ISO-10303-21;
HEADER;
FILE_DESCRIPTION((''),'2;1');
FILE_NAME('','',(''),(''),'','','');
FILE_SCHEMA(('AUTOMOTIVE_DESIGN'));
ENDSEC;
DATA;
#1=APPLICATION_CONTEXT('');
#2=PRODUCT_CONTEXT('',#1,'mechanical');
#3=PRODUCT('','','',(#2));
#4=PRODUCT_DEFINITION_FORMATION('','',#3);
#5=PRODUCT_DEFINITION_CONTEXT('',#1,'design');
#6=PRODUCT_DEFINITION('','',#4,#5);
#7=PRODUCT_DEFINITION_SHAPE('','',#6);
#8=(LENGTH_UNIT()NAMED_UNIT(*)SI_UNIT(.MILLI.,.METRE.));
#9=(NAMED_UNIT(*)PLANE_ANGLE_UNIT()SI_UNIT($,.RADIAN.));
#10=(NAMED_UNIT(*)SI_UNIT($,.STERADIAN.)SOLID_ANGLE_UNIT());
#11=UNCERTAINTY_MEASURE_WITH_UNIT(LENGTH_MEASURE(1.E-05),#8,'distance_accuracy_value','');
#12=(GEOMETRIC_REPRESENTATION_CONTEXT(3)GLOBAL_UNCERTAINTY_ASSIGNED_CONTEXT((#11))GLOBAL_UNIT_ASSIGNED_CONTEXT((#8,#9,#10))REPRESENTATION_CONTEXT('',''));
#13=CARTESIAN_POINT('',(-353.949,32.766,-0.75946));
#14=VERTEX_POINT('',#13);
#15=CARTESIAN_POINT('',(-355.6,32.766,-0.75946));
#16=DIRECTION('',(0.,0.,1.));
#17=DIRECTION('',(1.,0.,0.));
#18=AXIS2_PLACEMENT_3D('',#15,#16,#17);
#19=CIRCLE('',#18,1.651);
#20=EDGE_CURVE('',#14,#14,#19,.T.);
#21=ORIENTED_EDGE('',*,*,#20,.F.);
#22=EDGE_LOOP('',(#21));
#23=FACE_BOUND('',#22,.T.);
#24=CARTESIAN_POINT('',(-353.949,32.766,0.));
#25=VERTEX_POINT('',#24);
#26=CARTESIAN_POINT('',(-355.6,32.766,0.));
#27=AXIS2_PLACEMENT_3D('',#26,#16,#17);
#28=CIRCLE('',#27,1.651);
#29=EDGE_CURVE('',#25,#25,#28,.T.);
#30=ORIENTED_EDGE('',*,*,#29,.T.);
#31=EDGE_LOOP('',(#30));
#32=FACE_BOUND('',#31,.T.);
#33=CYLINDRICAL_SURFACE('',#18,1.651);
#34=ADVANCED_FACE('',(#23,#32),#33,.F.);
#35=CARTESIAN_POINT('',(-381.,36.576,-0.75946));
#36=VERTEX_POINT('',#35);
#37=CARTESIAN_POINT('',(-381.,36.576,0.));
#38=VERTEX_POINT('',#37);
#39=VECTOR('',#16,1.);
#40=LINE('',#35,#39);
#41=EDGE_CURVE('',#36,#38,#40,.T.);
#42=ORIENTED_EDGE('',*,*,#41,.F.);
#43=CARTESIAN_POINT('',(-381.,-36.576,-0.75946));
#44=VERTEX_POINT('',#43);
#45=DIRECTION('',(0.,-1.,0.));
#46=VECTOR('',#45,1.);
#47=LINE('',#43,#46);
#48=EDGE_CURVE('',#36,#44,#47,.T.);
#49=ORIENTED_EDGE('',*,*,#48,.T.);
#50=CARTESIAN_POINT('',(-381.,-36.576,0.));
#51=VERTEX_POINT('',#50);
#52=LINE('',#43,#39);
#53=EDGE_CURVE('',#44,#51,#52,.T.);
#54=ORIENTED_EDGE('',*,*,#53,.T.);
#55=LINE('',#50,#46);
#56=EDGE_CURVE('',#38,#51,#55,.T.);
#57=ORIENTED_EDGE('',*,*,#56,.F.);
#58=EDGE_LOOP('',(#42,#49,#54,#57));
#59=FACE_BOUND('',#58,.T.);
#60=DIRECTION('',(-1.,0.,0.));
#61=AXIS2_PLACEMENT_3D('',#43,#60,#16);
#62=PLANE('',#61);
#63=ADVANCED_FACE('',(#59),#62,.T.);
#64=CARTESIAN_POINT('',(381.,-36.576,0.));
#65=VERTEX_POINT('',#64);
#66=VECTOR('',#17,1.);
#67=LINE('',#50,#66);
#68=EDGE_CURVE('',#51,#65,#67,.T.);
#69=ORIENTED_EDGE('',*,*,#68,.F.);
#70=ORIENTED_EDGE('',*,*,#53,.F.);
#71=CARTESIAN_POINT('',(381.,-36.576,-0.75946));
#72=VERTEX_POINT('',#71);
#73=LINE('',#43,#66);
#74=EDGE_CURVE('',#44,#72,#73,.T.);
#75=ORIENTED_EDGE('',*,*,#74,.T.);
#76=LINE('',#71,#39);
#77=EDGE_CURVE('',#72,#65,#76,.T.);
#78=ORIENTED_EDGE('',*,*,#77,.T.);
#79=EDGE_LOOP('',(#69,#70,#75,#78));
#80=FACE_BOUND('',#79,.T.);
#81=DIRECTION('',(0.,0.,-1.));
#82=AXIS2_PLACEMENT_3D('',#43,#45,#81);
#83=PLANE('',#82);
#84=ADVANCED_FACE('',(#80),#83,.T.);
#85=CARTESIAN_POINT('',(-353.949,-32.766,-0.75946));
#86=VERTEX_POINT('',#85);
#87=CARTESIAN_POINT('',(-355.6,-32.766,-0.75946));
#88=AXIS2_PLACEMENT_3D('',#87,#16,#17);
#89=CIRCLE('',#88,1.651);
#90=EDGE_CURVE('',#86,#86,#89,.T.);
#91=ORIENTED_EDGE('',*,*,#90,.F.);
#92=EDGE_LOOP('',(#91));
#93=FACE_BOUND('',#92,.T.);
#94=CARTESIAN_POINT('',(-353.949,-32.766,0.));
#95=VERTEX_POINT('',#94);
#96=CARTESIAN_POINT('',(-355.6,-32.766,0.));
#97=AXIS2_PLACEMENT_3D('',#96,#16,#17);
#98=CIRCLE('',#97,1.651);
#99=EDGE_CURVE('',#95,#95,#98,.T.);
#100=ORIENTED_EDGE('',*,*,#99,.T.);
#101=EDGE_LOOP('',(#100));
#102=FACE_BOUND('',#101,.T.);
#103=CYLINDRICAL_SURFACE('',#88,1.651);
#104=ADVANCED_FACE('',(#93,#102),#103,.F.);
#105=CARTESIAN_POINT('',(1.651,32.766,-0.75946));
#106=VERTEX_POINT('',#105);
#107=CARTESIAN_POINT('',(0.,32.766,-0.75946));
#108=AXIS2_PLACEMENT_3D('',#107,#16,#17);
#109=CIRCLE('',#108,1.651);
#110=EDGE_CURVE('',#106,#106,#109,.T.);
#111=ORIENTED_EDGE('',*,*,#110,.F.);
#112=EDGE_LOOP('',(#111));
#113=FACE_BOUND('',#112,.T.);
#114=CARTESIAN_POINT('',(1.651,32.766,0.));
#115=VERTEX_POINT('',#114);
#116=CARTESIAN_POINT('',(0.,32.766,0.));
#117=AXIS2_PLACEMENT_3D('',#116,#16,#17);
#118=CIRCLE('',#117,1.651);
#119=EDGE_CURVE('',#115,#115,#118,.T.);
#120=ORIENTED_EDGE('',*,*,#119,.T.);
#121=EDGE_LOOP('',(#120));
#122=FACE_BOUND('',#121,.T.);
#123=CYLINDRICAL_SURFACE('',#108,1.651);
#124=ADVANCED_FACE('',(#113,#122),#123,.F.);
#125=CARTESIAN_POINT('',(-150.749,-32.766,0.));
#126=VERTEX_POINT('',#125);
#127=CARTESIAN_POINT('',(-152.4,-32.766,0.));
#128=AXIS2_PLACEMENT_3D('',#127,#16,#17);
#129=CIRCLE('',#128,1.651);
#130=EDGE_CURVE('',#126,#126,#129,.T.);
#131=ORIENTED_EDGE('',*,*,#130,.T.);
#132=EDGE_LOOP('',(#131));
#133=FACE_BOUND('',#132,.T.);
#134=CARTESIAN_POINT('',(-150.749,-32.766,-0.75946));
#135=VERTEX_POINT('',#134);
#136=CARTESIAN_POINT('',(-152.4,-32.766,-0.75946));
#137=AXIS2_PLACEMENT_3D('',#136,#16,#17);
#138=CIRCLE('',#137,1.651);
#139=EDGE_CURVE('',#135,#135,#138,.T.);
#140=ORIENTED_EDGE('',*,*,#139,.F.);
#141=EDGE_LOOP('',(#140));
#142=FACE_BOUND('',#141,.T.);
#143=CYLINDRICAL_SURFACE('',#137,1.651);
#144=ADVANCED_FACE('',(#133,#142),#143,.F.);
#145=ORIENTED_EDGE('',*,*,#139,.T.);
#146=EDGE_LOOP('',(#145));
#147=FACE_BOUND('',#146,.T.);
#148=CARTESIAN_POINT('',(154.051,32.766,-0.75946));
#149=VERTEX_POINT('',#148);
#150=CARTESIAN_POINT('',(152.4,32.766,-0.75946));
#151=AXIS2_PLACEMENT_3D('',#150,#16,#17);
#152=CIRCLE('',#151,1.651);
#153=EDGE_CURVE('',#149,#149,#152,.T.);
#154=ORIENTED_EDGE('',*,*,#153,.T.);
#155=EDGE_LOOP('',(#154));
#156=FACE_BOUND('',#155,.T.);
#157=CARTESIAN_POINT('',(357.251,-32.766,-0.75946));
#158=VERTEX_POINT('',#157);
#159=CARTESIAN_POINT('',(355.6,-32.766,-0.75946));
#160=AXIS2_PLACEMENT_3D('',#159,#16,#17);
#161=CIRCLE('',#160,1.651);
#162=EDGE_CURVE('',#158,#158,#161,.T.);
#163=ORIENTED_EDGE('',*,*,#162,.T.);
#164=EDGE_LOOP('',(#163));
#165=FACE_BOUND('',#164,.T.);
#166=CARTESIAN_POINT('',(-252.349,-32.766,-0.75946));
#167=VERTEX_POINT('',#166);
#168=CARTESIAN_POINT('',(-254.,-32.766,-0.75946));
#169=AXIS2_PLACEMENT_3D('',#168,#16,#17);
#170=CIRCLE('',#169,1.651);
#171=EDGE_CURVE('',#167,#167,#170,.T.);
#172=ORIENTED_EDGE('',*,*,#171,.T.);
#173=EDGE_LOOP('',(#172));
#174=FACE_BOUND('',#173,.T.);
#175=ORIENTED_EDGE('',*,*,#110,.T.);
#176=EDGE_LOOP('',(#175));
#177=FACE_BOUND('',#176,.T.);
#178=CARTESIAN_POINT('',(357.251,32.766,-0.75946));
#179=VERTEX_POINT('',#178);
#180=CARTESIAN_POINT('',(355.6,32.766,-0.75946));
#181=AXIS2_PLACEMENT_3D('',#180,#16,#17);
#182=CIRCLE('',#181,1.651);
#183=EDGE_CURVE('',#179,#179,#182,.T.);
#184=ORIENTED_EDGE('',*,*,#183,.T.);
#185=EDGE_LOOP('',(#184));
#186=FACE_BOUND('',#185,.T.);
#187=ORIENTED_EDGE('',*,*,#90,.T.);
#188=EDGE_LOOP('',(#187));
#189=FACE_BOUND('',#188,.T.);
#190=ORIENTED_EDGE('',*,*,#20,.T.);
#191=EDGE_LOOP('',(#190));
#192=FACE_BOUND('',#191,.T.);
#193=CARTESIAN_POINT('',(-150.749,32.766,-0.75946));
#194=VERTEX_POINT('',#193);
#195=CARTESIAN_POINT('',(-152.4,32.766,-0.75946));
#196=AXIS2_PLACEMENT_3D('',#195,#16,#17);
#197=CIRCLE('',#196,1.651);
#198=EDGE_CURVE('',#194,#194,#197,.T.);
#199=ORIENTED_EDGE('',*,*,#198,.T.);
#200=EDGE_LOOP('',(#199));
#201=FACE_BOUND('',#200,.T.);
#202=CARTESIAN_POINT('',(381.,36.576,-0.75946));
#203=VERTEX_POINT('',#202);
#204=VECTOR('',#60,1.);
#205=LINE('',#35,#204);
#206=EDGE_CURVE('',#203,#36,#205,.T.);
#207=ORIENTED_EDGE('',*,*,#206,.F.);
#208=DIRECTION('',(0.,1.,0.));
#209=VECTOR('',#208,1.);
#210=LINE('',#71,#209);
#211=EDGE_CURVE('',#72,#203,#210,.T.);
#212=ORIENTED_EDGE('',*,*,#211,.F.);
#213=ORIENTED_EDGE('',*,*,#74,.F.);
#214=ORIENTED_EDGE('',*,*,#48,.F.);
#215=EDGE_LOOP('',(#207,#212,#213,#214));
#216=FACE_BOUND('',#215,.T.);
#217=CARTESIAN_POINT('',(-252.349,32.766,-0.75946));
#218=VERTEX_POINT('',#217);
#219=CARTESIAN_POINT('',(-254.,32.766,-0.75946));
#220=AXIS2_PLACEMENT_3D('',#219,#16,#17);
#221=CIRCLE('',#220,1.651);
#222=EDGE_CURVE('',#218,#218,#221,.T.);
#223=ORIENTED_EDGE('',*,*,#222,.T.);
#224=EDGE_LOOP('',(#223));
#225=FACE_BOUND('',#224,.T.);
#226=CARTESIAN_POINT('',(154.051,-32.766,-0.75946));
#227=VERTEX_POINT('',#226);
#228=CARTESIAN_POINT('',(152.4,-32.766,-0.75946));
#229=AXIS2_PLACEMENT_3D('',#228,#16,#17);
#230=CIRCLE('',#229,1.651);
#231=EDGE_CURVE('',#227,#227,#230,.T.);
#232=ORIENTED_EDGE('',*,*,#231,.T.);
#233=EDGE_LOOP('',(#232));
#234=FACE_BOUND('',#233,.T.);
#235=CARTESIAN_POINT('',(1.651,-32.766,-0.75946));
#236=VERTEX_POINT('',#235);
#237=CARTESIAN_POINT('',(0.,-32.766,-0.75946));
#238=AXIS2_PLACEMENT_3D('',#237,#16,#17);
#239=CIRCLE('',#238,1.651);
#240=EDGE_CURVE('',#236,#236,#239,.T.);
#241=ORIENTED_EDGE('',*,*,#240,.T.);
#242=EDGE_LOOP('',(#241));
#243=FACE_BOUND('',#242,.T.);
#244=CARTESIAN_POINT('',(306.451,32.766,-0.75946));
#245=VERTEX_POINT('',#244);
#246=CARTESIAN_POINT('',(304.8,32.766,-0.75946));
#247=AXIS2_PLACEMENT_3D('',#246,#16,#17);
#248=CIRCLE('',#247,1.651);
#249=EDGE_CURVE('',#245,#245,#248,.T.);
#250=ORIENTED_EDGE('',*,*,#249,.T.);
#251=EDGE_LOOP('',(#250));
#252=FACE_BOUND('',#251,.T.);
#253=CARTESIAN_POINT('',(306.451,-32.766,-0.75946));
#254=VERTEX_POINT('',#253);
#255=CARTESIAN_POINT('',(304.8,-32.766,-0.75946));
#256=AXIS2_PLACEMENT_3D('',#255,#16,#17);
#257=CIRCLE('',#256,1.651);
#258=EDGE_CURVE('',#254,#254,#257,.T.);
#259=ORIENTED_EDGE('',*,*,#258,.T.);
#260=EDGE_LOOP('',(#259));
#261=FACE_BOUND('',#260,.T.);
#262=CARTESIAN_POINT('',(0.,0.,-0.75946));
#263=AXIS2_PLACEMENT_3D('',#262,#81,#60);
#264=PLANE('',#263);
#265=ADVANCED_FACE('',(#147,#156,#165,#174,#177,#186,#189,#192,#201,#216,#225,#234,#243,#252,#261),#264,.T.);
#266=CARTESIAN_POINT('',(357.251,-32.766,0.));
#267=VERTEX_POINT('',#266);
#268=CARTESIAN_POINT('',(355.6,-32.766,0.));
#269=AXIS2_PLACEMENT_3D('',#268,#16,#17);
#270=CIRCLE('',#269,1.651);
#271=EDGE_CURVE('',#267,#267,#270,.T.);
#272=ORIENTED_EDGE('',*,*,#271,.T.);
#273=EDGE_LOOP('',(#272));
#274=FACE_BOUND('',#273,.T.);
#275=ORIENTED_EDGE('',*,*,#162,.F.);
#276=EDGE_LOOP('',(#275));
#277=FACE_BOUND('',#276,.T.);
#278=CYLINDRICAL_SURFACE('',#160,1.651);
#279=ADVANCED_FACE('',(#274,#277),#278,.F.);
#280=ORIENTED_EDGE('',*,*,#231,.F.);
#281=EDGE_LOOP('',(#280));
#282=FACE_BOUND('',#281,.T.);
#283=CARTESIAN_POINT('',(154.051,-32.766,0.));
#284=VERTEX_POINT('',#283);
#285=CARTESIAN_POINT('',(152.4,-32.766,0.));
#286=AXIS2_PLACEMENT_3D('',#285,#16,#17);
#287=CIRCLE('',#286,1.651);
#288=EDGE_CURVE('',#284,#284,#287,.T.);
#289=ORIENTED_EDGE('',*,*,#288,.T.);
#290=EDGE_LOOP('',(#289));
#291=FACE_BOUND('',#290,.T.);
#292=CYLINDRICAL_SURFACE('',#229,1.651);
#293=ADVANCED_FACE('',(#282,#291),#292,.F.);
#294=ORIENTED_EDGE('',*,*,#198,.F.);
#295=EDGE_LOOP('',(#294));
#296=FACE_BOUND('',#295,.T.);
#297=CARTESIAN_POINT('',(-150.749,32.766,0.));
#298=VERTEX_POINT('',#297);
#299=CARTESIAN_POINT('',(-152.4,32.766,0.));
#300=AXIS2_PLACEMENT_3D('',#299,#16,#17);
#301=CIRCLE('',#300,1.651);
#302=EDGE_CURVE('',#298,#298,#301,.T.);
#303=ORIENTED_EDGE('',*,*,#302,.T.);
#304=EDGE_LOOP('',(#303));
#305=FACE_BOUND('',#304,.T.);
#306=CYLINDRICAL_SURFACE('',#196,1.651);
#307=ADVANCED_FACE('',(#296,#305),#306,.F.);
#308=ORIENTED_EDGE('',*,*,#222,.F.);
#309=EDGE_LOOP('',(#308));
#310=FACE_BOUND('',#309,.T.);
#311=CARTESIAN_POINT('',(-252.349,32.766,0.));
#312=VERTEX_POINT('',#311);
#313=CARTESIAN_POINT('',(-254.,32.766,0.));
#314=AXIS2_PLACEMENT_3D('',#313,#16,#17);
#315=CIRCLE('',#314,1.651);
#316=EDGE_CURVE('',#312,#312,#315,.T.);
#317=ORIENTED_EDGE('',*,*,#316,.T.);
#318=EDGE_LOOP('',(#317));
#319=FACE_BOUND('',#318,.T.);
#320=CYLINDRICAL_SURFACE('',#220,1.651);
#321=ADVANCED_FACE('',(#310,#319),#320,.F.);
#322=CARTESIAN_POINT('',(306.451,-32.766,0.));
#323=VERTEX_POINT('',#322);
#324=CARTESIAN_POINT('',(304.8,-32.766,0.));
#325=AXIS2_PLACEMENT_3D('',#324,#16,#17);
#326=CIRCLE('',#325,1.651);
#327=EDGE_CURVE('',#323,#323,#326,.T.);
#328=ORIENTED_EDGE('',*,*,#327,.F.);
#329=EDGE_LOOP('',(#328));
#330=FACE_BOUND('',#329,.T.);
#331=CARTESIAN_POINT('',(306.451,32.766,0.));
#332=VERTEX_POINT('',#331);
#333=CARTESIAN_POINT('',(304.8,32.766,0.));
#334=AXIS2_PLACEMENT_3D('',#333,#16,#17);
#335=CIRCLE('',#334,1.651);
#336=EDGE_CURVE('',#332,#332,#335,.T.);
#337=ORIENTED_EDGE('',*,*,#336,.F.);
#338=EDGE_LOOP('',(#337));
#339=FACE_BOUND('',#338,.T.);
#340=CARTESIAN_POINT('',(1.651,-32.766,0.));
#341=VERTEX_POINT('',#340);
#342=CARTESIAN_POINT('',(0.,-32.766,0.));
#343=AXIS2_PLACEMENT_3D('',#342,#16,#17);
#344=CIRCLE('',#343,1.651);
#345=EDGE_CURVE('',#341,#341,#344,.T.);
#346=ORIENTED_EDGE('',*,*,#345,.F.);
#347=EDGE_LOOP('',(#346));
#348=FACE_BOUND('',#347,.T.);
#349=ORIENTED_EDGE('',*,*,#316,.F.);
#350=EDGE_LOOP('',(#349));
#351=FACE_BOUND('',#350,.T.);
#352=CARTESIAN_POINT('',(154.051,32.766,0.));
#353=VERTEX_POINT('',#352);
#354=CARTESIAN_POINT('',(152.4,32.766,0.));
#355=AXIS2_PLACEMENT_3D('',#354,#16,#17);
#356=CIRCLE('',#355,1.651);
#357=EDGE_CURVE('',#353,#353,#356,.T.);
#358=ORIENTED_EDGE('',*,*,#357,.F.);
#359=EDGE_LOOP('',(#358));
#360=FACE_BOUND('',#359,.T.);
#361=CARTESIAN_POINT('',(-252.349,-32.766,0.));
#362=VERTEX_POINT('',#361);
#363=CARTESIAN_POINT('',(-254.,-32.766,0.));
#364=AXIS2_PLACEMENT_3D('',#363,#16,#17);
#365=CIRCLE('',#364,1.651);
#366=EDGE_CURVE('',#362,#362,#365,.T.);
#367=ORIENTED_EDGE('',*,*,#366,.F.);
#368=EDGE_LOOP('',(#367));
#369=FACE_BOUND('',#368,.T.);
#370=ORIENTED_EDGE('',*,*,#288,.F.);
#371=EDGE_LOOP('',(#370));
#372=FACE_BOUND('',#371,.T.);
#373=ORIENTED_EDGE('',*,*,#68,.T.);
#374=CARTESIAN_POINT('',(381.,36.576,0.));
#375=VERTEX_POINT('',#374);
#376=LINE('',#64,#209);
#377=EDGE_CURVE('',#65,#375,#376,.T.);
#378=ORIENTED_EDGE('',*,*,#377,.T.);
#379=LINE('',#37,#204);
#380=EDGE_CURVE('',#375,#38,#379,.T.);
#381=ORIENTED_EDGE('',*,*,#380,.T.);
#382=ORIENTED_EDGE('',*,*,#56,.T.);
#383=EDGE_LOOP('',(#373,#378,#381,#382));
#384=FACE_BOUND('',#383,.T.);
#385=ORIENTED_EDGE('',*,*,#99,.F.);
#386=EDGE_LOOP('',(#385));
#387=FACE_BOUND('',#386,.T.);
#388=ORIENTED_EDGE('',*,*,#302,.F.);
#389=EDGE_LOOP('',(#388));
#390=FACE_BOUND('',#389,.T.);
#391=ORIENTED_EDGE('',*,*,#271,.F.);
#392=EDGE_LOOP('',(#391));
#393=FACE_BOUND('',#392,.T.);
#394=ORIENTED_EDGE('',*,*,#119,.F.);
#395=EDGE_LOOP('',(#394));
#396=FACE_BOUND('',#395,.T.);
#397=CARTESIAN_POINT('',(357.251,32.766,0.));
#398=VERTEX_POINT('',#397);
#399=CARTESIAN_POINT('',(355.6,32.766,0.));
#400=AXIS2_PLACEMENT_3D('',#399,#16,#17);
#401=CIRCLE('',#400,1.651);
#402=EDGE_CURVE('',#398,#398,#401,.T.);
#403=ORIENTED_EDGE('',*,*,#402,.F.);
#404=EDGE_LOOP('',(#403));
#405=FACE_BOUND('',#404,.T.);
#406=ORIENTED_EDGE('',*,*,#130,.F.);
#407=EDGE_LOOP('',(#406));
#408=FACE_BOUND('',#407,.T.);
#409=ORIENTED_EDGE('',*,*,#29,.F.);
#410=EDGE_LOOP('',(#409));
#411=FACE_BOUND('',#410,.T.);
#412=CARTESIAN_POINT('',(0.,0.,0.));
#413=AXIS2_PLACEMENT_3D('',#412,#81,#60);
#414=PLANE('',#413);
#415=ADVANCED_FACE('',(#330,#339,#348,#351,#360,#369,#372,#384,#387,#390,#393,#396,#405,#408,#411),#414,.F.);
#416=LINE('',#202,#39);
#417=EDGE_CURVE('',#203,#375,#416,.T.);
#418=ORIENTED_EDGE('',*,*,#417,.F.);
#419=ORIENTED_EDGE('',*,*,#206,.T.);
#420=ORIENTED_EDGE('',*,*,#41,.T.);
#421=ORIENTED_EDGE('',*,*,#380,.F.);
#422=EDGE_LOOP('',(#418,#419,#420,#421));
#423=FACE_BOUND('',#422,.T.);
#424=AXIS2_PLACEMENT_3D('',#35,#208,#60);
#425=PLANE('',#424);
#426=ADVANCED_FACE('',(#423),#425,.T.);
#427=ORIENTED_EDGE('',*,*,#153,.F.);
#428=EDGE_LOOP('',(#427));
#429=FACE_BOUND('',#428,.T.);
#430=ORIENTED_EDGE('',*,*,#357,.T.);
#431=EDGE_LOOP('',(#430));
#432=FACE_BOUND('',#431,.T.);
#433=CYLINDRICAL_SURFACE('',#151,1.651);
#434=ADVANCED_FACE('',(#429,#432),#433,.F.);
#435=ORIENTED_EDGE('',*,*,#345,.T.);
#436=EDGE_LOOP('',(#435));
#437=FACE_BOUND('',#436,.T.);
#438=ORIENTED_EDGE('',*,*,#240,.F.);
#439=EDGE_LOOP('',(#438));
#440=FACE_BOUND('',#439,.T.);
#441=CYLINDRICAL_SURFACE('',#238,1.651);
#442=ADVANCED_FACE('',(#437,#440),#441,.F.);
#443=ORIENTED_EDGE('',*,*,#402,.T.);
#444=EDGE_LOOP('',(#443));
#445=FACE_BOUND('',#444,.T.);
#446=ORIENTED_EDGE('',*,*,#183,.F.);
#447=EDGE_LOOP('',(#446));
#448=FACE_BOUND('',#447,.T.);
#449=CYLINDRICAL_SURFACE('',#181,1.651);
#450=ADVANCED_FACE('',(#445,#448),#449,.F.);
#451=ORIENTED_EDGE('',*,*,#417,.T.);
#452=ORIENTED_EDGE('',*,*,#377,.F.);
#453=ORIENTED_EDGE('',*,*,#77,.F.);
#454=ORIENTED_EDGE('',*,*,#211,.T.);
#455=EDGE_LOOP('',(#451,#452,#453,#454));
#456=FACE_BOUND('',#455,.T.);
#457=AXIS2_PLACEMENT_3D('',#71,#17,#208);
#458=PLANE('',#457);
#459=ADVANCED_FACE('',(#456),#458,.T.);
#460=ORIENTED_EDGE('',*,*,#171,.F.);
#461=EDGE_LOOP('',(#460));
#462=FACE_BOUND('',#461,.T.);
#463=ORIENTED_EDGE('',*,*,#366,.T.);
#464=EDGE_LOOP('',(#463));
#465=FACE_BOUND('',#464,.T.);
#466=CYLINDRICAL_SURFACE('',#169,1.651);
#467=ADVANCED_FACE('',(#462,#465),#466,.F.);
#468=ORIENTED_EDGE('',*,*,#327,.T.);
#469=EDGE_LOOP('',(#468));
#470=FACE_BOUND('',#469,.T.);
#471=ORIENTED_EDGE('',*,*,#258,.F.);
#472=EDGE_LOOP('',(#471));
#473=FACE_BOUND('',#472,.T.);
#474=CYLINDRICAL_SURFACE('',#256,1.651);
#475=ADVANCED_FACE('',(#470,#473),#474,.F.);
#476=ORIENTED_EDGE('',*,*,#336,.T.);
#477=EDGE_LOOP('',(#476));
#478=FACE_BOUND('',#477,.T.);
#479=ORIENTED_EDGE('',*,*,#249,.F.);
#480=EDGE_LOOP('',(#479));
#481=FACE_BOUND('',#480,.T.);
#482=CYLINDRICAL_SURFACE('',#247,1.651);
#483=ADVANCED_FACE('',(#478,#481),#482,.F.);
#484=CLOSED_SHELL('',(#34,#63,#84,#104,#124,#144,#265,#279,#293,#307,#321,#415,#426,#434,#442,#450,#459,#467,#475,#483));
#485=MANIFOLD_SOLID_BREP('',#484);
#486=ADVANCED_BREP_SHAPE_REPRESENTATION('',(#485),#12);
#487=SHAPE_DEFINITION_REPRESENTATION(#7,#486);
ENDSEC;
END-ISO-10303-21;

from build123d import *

# Parameters (mm, degrees)
SKETCH2_W          = 762
SKETCH2_H          = 73.152
BASE_FLANGE1_DEPTH = 0.75946
SKETCH13_R         = 1.651
CUT_EXTRUDE1_DEPTH = 383.752374983


# Sheet-metal steps are written as plain solids
with BuildPart() as part:
    # Sketch2 → Base-Flange1 (new body)
    with BuildSketch(Plane.XY):
        Rectangle(SKETCH2_W, SKETCH2_H)
    extrude(amount=-BASE_FLANGE1_DEPTH)

    # Sketch13 → Cut-Extrude1 (cut, through all)
    with BuildSketch(Plane.XY):
        with Locations((-254, 32.766)):
            Circle(SKETCH13_R)
        with Locations((-254, -32.766)):
            Circle(SKETCH13_R)
        with Locations((0, 32.766)):
            Circle(SKETCH13_R)
        with Locations((304.8, 32.766)):
            Circle(SKETCH13_R)
        with Locations((304.8, -32.766)):
            Circle(SKETCH13_R)
        with Locations((0, -32.766)):
            Circle(SKETCH13_R)
        with Locations((355.6, 32.766)):
            Circle(SKETCH13_R)
        with Locations((355.6, -32.766)):
            Circle(SKETCH13_R)
        with Locations((152.4, 32.766)):
            Circle(SKETCH13_R)
        with Locations((152.4, -32.766)):
            Circle(SKETCH13_R)
        with Locations((-152.4, 32.766)):
            Circle(SKETCH13_R)
        with Locations((-152.4, -32.766)):
            Circle(SKETCH13_R)
        with Locations((-355.6, 32.766)):
            Circle(SKETCH13_R)
        with Locations((-355.6, -32.766)):
            Circle(SKETCH13_R)
    extrude(amount=-CUT_EXTRUDE1_DEPTH, mode=Mode.SUBTRACT)


solid = part.part
